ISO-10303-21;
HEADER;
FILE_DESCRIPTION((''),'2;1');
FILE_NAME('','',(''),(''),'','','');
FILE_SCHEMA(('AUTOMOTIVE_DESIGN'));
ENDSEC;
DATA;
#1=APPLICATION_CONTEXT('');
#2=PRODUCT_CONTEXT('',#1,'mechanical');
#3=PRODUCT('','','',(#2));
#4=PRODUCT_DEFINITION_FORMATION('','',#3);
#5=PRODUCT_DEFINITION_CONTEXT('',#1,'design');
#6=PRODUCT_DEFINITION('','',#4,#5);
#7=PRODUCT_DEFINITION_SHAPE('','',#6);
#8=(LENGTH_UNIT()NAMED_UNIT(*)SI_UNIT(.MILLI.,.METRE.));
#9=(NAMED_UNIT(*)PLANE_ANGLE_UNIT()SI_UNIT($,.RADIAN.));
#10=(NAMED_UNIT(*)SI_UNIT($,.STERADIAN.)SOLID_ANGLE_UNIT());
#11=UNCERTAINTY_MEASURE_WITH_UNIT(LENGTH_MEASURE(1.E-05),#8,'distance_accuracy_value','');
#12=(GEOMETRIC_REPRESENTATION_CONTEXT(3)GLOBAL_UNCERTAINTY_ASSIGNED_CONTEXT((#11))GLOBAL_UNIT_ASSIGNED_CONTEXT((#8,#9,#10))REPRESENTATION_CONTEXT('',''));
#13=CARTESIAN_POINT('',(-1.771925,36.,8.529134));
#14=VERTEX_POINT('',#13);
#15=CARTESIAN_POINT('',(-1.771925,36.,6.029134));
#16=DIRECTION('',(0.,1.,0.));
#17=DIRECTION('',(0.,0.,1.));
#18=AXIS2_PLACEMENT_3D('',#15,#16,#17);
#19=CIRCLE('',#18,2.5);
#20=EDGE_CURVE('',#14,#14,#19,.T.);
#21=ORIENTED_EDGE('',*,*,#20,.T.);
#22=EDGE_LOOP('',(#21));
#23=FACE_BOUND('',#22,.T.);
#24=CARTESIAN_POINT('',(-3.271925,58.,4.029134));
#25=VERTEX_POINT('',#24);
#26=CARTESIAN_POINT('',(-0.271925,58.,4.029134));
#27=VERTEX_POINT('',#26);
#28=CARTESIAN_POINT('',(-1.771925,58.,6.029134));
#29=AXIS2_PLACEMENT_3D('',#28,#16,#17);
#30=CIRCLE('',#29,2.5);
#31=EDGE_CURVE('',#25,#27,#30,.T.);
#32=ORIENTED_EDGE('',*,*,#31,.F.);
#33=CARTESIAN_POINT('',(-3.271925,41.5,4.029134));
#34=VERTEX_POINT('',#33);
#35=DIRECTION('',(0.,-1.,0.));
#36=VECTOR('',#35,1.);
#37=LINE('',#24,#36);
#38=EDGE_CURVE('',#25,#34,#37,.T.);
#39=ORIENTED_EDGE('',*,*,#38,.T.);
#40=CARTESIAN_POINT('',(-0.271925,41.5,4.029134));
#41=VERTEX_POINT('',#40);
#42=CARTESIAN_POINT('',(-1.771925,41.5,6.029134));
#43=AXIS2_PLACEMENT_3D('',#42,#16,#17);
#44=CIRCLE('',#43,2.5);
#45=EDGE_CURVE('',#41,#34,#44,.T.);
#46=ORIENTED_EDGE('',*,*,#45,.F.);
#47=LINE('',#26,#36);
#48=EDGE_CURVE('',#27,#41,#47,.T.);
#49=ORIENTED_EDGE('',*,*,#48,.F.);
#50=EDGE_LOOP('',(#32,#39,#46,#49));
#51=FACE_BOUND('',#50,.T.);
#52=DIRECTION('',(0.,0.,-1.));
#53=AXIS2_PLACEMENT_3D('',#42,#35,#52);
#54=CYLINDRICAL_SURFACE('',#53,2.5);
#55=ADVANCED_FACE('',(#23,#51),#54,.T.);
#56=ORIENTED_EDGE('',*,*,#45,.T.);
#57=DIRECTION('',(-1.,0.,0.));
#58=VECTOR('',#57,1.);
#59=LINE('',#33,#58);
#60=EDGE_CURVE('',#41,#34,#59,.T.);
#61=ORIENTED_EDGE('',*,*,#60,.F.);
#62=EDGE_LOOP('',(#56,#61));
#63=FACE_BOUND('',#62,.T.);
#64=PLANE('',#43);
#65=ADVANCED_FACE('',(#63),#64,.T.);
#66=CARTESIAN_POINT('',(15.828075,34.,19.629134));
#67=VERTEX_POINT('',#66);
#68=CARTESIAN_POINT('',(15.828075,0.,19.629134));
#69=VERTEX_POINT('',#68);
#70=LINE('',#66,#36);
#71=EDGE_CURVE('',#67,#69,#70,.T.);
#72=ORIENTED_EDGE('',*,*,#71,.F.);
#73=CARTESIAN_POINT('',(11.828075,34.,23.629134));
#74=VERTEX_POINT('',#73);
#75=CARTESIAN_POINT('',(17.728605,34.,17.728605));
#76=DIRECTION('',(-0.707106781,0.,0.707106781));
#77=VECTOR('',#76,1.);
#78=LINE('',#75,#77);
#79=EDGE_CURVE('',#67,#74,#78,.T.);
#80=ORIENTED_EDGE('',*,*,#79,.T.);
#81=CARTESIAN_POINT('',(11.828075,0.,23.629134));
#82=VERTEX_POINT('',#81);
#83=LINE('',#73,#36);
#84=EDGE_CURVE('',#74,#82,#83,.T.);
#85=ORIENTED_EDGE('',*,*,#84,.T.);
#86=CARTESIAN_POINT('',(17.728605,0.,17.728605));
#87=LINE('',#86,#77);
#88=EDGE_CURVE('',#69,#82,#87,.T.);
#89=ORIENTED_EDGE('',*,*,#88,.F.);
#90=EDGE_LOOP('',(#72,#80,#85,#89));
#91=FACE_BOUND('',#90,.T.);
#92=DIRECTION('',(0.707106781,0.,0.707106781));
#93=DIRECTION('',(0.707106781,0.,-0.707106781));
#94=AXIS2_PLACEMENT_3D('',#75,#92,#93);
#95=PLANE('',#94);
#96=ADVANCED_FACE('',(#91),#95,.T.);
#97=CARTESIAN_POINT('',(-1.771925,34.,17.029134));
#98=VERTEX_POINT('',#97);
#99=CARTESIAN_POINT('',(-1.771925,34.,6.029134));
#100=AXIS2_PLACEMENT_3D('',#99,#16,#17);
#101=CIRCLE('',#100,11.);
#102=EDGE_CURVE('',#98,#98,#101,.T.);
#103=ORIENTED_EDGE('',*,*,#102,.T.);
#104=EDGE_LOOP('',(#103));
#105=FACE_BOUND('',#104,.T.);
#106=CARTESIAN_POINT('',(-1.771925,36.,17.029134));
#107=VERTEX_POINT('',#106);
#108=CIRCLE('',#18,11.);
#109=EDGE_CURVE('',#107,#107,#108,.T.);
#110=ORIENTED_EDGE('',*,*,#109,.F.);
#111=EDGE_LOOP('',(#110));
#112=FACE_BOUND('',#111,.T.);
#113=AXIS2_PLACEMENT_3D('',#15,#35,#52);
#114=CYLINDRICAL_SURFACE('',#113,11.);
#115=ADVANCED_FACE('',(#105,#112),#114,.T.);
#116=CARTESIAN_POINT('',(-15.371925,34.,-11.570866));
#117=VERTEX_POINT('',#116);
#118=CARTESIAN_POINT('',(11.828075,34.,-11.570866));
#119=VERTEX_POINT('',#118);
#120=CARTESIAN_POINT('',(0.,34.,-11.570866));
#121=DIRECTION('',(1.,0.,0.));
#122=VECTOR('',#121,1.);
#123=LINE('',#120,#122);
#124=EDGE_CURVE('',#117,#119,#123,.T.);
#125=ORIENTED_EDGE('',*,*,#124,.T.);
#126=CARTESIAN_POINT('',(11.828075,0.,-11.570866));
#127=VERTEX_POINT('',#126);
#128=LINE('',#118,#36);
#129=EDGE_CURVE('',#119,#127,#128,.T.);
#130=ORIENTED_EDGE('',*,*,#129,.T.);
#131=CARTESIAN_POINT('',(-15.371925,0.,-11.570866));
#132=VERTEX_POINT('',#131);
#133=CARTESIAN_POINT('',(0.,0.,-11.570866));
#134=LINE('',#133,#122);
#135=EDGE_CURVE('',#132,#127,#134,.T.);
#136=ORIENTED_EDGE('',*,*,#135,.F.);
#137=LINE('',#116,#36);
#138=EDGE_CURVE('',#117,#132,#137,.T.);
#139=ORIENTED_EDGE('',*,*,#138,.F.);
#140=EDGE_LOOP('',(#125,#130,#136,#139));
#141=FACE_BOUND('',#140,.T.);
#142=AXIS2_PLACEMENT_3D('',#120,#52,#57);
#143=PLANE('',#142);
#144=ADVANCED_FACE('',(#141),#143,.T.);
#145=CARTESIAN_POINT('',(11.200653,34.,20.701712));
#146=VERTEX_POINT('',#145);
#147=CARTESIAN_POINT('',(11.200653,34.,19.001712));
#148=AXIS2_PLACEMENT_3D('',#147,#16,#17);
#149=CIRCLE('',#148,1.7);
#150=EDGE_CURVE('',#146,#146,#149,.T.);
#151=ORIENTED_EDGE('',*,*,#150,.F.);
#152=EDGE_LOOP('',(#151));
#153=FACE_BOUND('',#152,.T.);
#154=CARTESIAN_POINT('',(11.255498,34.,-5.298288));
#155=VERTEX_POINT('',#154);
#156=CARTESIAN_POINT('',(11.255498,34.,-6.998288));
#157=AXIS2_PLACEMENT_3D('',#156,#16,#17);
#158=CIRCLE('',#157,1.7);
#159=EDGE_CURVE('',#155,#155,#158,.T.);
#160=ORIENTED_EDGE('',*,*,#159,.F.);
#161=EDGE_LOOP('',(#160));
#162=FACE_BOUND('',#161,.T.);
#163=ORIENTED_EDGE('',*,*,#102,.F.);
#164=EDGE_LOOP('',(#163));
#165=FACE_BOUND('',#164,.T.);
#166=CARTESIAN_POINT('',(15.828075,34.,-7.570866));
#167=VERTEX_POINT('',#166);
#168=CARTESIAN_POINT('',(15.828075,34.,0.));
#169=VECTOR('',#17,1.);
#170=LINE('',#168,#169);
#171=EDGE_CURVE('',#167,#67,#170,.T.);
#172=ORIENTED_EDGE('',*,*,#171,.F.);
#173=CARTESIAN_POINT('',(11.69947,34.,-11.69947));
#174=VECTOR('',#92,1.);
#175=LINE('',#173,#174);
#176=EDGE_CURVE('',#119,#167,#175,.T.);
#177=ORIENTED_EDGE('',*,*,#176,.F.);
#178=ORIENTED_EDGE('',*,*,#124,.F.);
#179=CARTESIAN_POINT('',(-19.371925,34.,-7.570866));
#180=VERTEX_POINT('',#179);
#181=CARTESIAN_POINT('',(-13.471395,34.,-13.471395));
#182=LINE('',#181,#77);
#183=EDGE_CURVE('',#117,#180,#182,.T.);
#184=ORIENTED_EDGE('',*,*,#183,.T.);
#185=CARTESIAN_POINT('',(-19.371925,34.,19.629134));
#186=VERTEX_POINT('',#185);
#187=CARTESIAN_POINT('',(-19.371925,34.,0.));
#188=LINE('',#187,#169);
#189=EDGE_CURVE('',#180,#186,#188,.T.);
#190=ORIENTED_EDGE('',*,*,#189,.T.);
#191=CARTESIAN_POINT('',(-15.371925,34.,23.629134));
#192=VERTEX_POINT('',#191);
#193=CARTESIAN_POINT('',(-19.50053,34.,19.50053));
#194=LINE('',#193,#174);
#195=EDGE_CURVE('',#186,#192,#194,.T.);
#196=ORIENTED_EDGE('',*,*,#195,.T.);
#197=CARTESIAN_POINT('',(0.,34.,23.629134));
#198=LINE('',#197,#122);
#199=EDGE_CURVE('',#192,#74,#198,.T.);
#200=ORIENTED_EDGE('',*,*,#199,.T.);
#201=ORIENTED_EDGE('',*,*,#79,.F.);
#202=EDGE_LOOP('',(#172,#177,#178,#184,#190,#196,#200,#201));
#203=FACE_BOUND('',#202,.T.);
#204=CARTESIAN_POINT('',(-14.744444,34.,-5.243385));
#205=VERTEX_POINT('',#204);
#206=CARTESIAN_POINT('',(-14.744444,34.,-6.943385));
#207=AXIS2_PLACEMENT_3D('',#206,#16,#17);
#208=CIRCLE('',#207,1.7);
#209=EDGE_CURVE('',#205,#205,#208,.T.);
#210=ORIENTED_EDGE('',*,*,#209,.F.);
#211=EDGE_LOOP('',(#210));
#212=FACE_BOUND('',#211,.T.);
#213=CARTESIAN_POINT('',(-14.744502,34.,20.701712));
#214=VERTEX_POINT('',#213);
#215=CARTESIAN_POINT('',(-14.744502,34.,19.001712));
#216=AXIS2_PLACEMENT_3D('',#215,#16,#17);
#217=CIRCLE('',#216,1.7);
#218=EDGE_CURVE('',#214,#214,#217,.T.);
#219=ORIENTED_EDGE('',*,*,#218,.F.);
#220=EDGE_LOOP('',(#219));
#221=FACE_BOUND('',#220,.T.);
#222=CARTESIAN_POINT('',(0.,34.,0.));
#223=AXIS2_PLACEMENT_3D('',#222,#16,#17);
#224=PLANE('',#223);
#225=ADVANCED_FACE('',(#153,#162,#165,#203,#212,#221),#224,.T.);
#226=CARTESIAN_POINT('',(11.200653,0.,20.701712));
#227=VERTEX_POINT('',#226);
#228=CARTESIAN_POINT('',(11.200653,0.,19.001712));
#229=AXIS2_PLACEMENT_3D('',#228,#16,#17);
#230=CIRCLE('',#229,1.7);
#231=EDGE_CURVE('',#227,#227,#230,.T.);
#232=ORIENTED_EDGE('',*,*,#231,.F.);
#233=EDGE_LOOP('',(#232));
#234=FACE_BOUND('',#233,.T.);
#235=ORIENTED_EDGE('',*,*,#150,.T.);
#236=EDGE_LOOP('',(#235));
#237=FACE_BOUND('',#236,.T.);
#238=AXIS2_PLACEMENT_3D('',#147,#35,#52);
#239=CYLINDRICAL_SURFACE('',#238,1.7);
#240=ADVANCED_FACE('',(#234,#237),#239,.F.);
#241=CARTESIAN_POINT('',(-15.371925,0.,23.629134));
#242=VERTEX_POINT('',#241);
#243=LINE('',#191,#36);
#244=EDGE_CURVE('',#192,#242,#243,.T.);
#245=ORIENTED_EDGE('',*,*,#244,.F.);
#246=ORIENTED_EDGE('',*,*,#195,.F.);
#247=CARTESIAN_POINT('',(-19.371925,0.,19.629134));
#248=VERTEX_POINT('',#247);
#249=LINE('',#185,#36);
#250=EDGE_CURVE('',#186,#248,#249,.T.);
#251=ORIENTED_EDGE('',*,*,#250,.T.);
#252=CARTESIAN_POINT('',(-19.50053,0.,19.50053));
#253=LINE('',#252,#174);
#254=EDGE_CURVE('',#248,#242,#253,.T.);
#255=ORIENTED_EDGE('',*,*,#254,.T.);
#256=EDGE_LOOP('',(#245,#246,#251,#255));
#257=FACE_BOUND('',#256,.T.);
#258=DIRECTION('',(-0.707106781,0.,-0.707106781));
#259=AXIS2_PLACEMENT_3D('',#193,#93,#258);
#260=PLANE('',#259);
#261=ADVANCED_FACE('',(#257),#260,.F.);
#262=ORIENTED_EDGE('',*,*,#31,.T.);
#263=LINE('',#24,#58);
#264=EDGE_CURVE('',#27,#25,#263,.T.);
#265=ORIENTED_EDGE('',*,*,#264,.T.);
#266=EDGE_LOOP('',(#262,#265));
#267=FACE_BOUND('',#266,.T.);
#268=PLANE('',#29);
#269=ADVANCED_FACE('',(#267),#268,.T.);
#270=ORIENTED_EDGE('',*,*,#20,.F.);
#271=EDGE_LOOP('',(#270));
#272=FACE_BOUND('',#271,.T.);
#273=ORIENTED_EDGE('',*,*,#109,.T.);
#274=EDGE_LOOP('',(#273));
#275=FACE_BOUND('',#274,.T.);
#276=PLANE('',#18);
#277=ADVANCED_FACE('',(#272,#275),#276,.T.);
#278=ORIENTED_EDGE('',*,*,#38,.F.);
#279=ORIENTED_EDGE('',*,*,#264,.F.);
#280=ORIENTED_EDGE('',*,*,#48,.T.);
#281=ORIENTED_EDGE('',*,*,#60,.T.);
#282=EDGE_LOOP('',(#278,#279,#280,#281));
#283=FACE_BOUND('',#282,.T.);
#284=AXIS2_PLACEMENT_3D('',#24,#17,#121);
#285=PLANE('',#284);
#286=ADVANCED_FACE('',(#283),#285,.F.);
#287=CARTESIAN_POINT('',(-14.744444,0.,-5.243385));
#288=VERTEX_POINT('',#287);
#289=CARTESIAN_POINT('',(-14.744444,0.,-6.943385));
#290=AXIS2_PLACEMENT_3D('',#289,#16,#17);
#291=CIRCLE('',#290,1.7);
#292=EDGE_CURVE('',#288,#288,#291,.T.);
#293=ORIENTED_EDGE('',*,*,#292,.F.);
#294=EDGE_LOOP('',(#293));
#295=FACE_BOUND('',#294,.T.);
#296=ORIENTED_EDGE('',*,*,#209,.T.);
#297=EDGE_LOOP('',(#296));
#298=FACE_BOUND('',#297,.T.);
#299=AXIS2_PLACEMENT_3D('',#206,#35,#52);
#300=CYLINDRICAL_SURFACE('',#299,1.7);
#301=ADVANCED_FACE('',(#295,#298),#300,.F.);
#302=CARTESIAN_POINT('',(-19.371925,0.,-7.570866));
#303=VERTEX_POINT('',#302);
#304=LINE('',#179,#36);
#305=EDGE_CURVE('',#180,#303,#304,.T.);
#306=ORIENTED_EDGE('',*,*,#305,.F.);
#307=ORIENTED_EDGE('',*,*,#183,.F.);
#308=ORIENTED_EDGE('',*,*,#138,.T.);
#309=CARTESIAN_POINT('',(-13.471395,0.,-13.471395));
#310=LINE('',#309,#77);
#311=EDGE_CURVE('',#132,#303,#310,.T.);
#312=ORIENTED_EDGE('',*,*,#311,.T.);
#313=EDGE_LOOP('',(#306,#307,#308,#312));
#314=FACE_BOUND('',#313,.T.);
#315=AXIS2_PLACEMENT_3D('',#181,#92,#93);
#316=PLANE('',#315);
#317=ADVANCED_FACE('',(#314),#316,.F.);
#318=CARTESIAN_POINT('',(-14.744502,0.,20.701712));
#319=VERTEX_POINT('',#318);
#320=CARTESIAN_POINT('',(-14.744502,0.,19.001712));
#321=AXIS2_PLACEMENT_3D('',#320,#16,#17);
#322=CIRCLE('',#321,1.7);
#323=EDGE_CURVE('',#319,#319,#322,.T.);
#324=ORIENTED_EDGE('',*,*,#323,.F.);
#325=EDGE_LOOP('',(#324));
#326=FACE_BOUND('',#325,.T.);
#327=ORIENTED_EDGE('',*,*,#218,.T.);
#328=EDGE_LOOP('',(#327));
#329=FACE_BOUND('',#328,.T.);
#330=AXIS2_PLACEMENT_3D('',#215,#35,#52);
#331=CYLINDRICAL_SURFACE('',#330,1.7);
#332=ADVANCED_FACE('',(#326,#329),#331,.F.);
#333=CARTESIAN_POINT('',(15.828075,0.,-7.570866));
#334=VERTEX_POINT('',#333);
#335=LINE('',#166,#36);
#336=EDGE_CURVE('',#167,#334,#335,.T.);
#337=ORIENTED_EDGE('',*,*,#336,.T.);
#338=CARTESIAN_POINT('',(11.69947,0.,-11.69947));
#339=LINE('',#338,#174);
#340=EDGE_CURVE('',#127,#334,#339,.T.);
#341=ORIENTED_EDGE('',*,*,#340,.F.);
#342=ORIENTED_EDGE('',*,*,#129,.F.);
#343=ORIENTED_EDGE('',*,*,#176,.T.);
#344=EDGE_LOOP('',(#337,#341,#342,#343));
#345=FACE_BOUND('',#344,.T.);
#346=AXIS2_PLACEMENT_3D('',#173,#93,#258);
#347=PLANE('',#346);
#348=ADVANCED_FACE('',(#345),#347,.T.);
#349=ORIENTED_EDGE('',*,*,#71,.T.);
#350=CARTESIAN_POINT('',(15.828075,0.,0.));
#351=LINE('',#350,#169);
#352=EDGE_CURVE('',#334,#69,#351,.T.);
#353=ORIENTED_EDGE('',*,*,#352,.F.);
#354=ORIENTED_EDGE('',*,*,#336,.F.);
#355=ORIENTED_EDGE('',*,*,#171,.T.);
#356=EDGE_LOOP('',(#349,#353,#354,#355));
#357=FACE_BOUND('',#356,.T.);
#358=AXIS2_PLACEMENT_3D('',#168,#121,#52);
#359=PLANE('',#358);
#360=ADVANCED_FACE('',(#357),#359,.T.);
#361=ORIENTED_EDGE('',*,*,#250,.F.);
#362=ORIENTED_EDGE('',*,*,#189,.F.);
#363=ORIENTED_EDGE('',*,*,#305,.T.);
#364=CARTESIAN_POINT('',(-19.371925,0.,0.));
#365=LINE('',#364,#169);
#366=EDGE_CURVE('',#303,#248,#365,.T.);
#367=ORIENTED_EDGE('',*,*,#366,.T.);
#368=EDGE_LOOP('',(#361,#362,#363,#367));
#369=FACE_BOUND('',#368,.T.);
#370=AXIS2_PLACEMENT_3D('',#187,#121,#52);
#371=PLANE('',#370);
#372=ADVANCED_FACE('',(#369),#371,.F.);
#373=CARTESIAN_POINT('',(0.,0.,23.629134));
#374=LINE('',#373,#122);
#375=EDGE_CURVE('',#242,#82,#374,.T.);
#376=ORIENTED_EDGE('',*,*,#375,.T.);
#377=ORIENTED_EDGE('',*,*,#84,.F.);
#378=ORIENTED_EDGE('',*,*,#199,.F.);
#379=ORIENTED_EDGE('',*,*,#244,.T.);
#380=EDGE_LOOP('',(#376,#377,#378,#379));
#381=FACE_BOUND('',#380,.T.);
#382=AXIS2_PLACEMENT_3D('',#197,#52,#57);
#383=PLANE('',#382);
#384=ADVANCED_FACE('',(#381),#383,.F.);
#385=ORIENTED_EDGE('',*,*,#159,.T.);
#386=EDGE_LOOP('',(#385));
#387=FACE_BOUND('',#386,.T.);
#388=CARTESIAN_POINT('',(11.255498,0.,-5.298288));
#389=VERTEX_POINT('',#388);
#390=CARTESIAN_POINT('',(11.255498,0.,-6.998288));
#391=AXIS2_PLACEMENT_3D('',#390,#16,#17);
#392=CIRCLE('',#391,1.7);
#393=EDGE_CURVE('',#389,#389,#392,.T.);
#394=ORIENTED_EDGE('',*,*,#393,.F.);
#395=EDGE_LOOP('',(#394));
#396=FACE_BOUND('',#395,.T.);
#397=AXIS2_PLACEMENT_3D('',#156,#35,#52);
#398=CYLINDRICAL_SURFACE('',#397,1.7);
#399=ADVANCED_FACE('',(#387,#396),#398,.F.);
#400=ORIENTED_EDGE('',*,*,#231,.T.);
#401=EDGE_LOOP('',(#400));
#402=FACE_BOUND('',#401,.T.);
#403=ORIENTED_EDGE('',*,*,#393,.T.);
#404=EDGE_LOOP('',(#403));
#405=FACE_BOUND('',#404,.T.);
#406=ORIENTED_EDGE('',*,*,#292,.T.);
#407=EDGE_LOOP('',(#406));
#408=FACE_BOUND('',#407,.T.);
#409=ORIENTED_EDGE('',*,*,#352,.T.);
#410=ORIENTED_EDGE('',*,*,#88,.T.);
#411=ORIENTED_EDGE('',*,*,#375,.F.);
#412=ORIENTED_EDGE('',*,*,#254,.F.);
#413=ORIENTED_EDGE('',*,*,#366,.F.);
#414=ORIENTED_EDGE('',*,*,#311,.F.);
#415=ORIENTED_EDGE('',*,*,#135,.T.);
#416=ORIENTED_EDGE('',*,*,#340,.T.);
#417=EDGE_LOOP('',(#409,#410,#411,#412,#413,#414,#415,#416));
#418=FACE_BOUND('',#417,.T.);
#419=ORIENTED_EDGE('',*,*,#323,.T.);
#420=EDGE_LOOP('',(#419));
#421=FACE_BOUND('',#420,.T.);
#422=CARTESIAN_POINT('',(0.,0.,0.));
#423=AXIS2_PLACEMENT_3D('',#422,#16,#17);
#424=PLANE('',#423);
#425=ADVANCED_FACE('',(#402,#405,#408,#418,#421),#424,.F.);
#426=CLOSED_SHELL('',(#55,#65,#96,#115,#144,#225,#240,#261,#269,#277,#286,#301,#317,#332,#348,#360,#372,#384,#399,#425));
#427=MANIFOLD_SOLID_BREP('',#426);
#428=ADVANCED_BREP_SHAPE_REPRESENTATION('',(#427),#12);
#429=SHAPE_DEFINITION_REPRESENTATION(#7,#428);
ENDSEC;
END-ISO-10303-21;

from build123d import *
from build123d.topology import SkipClean

# Parameters (mm, degrees)
SKETCH1_R           = 1.7
BOSS_EXTRUDE1_DEPTH = 34
SKETCH2_R           = 11
BOSS_EXTRUDE2_DEPTH = 2
SKETCH3_R           = 2.5
BOSS_EXTRUDE3_DEPTH = 5.5
BOSS_EXTRUDE4_DEPTH = 16.5


with BuildPart() as part:
    # Sketch1 → Boss-Extrude1 (new body)
    with BuildSketch(Plane(origin=(0, 0, 0), x_dir=(1, 0, 0), z_dir=(0, 1, 0))):
        Polygon((11.828075118, 11.570865707), (-15.371924882, 11.570865707), (-19.371924882, 7.570865707), (-19.371924882, -19.629134293), (-15.371924882, -23.629134293), (11.828075118, -23.629134293), (15.828075118, -19.629134293), (15.828075118, 7.570865707), align=None)
        with Locations((11.255497705, 6.998288294)):
            Circle(SKETCH1_R, mode=Mode.SUBTRACT)
        with Locations((-14.744444327, 6.943385151)):
            Circle(SKETCH1_R, mode=Mode.SUBTRACT)
        with Locations((11.200652531, -19.001711706)):
            Circle(SKETCH1_R, mode=Mode.SUBTRACT)
        with Locations((-14.744502295, -19.001711706)):
            Circle(SKETCH1_R, mode=Mode.SUBTRACT)
    extrude(amount=BOSS_EXTRUDE1_DEPTH)

    # Sketch2 → Boss-Extrude2 (add)
    with BuildSketch(Plane(origin=(0, 34, 0), x_dir=(1, 0, 0), z_dir=(0, 1, 0))):
        with Locations((-1.771924882, -6.029134293)):
            Circle(SKETCH2_R)
    extrude(amount=BOSS_EXTRUDE2_DEPTH)

    # Sketch3 → Boss-Extrude3 (add)
    with BuildSketch(Plane(origin=(0, 36, 0), x_dir=(1, 0, 0), z_dir=(0, 1, 0))):
        with Locations((-1.771924882, -6.029134293)):
            Circle(SKETCH3_R)
    extrude(amount=BOSS_EXTRUDE3_DEPTH)

    # Sketch4 → Boss-Extrude4 (add)
    with SkipClean():  # the faces are left unmerged after this step: merging them gives an invalid solid
        with BuildSketch(Plane(origin=(0, 41.5, 0), x_dir=(1, 0, 0), z_dir=(0, 1, 0))):
            with BuildLine():
                Line((-3.271924882, -4.029134293), (-0.271924882, -4.029134293))
                ThreePointArc((-0.271924882, -4.029134293), (-1.771924882, -8.529134293), (-3.271924882, -4.029134293))
            make_face()
        extrude(amount=BOSS_EXTRUDE4_DEPTH)
    add(part.part.scale(1), mode=Mode.REPLACE)  # the faces are merged on a copy


solid = part.part
